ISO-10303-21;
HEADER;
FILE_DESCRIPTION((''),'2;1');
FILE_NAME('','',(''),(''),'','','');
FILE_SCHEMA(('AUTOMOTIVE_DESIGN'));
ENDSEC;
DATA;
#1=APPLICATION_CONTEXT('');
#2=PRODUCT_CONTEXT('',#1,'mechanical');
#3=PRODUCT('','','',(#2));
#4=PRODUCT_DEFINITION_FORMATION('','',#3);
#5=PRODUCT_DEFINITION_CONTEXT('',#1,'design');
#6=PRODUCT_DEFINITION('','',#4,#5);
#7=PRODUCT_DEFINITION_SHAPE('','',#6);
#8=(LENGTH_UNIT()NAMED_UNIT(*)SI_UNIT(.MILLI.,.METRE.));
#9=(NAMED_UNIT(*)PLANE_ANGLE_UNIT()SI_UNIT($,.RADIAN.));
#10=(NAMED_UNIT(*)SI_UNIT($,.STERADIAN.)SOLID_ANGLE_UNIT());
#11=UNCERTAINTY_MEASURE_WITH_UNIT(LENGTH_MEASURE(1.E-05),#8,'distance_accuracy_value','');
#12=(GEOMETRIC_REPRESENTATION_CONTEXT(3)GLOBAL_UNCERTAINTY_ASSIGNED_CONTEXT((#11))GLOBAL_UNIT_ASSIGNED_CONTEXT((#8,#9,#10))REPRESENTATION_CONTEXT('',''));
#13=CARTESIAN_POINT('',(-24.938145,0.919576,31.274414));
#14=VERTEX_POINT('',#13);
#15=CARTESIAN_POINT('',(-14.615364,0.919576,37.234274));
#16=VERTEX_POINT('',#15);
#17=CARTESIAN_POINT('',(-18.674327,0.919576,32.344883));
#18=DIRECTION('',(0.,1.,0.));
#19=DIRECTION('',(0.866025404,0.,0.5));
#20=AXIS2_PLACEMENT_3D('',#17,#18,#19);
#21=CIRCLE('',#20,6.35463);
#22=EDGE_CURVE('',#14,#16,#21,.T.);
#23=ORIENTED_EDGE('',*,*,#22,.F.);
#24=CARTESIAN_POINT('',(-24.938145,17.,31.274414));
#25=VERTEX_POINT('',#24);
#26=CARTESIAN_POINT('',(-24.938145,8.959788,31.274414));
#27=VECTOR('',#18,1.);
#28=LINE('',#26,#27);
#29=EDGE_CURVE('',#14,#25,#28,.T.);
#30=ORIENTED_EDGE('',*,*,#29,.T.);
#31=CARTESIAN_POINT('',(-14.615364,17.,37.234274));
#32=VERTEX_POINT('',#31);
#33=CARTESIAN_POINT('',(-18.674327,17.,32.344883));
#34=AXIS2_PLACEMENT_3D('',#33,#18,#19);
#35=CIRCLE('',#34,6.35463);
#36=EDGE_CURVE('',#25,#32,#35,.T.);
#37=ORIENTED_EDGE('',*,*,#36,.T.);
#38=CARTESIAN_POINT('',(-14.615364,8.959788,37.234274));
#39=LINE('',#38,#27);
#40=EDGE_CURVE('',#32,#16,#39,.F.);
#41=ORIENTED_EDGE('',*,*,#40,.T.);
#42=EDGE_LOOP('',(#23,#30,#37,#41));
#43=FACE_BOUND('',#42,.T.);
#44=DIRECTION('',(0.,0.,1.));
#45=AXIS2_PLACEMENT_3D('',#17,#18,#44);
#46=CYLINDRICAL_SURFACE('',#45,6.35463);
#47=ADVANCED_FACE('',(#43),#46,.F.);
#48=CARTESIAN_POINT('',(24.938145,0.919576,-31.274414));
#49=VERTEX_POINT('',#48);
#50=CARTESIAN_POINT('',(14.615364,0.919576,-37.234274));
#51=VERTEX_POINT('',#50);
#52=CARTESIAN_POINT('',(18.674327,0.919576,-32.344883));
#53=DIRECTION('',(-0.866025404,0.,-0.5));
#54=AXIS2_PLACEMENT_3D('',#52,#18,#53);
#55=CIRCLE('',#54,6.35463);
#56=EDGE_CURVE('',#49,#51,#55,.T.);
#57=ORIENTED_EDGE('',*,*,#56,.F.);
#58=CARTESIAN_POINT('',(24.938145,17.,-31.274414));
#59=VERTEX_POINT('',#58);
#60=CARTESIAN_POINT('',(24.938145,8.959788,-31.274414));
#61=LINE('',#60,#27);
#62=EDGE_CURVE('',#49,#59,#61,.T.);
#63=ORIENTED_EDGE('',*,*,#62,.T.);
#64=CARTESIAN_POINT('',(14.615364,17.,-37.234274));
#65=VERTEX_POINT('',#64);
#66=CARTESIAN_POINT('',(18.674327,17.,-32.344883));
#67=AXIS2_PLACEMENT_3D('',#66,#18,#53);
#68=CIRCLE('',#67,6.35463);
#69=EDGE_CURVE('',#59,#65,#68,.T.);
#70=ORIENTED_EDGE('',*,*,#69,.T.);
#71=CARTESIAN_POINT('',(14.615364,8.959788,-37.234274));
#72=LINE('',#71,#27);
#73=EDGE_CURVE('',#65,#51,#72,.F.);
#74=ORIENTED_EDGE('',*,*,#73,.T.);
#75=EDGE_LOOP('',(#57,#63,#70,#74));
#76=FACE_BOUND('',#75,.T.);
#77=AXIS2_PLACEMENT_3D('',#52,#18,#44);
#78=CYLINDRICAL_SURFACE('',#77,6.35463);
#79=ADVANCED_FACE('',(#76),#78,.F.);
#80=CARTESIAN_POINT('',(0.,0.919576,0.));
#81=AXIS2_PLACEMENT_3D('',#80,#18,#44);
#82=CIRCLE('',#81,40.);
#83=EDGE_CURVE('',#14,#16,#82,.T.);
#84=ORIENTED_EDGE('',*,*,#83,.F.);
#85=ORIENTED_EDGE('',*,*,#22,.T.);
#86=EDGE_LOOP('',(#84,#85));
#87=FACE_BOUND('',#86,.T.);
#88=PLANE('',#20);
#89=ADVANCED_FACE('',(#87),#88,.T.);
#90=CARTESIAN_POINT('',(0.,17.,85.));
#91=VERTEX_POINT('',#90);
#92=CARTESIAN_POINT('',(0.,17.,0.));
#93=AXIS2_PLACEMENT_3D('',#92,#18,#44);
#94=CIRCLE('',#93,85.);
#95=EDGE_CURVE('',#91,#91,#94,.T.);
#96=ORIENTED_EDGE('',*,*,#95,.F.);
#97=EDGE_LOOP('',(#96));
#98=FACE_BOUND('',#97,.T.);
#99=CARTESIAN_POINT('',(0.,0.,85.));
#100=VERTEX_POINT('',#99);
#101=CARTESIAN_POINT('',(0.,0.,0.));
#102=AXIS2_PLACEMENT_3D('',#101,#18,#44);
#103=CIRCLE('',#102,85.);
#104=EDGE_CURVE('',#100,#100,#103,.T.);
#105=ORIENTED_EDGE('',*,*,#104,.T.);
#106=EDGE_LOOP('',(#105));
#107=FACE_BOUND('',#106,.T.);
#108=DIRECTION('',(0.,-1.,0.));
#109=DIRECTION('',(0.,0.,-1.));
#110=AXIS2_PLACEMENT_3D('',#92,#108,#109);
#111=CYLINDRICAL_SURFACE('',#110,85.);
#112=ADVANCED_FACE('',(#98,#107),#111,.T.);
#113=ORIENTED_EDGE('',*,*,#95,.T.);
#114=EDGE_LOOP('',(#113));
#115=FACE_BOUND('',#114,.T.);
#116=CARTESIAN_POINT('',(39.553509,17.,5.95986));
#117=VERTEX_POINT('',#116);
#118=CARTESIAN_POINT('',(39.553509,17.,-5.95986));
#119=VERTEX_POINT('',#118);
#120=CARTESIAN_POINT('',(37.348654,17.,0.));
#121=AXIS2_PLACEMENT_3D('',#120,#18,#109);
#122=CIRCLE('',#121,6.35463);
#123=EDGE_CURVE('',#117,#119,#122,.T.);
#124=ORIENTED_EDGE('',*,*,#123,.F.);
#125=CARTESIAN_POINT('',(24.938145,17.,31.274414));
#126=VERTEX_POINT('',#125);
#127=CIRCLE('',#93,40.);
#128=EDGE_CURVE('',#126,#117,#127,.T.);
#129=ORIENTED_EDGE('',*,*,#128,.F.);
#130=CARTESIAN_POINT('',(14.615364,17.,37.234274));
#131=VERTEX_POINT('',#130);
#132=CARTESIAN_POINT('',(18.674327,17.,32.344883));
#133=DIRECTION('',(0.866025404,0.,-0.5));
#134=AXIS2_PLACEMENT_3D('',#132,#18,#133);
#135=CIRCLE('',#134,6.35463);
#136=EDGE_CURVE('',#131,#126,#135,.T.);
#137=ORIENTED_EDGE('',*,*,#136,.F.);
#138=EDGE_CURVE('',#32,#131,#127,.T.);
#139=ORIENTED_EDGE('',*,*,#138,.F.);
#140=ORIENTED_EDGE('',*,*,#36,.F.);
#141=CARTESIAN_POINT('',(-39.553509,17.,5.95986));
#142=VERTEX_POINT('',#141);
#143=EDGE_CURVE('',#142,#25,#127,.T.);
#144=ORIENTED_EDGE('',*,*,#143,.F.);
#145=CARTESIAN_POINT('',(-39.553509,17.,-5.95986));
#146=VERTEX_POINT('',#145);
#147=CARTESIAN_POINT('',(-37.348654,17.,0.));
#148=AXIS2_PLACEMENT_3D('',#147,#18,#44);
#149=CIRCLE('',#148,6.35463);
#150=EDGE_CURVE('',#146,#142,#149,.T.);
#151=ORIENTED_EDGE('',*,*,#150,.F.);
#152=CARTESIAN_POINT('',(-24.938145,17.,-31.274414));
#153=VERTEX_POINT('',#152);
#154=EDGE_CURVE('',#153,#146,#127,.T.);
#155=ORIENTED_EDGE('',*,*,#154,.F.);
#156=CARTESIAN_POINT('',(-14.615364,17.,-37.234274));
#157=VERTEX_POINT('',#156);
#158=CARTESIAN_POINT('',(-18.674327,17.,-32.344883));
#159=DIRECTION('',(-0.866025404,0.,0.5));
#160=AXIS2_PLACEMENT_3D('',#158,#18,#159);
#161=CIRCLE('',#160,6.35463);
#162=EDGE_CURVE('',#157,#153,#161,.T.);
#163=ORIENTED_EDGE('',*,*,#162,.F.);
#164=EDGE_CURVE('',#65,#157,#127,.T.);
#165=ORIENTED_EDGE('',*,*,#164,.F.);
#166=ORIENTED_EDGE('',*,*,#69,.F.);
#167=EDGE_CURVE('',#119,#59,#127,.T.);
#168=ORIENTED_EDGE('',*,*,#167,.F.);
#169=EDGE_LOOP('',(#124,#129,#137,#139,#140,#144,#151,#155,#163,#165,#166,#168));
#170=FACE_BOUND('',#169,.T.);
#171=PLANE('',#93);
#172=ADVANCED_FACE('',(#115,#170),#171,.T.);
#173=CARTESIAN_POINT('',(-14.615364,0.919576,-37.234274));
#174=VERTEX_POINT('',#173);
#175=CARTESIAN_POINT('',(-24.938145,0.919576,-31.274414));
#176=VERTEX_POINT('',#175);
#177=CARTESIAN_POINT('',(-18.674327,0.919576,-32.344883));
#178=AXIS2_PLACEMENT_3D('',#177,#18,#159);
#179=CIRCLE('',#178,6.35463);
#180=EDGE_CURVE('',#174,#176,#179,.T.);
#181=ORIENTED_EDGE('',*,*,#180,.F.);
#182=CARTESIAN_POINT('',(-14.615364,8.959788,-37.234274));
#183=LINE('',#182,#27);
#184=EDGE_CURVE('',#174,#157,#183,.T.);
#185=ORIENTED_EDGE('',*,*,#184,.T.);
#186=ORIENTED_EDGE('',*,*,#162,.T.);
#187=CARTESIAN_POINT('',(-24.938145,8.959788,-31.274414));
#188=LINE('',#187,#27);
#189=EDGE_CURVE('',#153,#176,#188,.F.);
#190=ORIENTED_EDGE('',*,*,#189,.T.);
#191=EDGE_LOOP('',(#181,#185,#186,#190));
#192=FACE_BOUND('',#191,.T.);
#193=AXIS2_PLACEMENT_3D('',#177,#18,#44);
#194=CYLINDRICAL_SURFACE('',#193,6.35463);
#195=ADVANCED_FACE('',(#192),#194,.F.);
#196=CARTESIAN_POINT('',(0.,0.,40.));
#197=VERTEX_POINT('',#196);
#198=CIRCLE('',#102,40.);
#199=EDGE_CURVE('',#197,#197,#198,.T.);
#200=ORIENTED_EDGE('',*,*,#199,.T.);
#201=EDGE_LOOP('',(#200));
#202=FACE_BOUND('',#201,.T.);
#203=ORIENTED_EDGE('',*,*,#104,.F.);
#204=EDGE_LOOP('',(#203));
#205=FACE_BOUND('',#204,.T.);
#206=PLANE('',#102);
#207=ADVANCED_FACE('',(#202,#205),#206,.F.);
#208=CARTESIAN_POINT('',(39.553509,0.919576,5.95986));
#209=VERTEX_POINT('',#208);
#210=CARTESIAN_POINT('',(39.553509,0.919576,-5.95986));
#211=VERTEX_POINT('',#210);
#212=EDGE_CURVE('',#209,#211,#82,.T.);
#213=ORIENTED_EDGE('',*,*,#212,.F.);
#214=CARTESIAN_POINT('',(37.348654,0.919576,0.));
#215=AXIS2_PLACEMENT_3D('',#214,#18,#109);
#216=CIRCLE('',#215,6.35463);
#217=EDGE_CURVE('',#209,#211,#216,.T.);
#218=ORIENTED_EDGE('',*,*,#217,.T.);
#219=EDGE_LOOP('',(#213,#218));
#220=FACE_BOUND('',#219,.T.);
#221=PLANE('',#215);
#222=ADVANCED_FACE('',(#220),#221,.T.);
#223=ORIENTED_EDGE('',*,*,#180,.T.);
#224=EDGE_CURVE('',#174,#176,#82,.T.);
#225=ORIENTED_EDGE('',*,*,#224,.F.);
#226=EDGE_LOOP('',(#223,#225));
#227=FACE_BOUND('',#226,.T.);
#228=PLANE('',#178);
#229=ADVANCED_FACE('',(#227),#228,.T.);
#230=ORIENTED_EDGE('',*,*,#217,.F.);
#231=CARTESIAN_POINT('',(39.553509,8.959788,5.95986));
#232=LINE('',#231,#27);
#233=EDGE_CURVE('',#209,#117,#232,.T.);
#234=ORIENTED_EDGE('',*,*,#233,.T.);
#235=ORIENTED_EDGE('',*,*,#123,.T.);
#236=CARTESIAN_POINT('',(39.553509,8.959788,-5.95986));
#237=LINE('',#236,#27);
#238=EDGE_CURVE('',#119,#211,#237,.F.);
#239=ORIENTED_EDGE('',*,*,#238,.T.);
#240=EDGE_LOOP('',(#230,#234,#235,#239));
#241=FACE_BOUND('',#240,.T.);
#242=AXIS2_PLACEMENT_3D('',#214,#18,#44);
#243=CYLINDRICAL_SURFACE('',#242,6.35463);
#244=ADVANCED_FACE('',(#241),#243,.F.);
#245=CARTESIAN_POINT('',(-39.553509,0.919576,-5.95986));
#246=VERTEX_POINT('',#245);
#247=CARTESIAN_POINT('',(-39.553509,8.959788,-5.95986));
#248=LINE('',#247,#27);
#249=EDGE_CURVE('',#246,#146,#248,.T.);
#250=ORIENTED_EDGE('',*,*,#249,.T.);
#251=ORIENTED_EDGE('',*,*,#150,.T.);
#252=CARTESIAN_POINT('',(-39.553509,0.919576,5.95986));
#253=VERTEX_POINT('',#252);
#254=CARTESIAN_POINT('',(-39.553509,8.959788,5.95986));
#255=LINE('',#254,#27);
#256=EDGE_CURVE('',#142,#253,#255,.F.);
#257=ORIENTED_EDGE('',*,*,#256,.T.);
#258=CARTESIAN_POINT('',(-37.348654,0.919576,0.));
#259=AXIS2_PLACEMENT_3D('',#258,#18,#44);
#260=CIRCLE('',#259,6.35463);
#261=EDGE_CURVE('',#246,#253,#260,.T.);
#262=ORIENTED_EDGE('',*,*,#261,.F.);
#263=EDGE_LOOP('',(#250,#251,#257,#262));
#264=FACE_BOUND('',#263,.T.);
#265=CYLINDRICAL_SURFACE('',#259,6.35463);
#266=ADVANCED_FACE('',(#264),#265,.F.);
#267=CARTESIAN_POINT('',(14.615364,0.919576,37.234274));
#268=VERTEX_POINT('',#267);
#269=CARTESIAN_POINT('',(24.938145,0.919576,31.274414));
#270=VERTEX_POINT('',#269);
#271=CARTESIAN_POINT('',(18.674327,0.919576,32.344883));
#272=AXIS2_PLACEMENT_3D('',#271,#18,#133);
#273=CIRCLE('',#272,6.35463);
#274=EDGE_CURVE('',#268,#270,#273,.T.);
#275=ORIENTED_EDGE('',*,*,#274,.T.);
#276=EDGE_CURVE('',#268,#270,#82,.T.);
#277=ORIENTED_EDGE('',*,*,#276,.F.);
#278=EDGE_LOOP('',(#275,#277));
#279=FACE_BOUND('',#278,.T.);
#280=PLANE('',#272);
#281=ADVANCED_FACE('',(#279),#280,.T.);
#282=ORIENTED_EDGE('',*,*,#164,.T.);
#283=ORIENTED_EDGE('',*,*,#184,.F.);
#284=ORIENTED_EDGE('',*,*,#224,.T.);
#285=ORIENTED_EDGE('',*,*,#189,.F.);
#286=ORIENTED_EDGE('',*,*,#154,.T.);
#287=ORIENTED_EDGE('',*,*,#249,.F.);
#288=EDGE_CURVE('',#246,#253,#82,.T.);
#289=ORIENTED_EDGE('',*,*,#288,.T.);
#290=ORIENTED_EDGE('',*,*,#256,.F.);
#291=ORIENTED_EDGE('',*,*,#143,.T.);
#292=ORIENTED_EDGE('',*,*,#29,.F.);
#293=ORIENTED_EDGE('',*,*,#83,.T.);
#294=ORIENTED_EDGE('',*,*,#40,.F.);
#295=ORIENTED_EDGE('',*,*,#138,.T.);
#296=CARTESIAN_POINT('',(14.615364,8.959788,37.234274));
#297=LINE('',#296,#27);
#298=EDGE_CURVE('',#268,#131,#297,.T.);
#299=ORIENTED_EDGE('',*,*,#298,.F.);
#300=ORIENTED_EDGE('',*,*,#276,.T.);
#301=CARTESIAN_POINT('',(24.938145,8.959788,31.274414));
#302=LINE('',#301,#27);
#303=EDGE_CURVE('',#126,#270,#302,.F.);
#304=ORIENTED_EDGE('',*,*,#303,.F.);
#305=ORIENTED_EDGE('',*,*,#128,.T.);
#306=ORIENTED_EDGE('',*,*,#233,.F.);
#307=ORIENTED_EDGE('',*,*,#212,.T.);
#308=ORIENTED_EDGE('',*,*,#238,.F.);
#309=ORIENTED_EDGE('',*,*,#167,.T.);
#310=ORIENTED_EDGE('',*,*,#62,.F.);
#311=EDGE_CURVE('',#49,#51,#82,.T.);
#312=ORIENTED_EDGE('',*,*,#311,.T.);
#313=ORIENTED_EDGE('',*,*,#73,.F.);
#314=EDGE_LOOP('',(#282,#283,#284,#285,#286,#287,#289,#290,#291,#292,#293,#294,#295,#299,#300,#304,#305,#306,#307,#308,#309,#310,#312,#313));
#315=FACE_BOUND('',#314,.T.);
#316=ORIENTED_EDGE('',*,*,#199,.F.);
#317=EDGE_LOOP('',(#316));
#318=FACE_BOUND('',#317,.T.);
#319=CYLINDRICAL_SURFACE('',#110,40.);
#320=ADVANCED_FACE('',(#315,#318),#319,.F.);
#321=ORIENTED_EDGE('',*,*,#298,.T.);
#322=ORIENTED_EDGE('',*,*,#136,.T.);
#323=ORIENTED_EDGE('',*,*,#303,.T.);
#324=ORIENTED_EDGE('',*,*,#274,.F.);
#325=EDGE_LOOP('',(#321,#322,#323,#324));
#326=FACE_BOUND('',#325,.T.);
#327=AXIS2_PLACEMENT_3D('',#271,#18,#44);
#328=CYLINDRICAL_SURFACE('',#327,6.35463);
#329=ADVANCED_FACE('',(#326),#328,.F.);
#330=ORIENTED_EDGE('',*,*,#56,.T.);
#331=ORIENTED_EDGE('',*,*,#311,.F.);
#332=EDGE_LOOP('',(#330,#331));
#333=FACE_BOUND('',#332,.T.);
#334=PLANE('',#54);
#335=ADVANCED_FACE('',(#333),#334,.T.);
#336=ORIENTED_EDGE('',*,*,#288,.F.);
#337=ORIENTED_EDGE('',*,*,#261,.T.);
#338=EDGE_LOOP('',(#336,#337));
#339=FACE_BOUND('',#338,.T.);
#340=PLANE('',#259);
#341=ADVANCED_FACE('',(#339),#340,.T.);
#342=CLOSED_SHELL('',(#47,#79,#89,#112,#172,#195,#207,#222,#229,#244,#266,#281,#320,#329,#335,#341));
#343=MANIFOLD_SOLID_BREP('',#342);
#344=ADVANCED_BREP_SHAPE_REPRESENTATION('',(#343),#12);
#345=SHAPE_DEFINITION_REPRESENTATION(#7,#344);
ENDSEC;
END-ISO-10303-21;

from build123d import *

# Parameters (mm, degrees)
SKETCH1_R           = 85
BOSS_EXTRUDE1_DEPTH = 17
SKETCH2_R           = 40
CUT_EXTRUDE1_DEPTH  = 122.404283285
SKETCH3_R           = 6.354629686
CUT_EXTRUDE2_DEPTH  = 16.080423811
CIRPATTERN1_COUNT   = 6


with BuildPart() as part:
    # Sketch1 → Boss-Extrude1 (new body)
    with BuildSketch(Plane(origin=(0, 0, 0), x_dir=(1, 0, 0), z_dir=(0, 1, 0))):
        Circle(SKETCH1_R)
    extrude(amount=BOSS_EXTRUDE1_DEPTH)

    # Sketch2 → Cut-Extrude1 (cut, through all)
    with BuildSketch(Plane(origin=(0, 0, 0), x_dir=(1, 0, 0), z_dir=(0, 1, 0))):
        Circle(SKETCH2_R)
    extrude(amount=CUT_EXTRUDE1_DEPTH, mode=Mode.SUBTRACT)

    # Sketch3 → Cut-Extrude2 (cut)
    with BuildSketch(Plane(origin=(0, 17, 0), x_dir=(1, 0, 0), z_dir=(0, 1, 0))):
        with Locations((-37.348653681, 0)):
            Circle(SKETCH3_R)
    cut_extrude2 = extrude(amount=-CUT_EXTRUDE2_DEPTH, mode=Mode.SUBTRACT)

    # CirPattern1: Cut-Extrude2 ×6 about axis
    cirpattern1_axis = Axis((0, 0, 0), (0, 1, 0))
    for i in range(1, CIRPATTERN1_COUNT):
        add(cut_extrude2.rotate(cirpattern1_axis, i * 360 / CIRPATTERN1_COUNT), mode=Mode.SUBTRACT)


solid = part.part
